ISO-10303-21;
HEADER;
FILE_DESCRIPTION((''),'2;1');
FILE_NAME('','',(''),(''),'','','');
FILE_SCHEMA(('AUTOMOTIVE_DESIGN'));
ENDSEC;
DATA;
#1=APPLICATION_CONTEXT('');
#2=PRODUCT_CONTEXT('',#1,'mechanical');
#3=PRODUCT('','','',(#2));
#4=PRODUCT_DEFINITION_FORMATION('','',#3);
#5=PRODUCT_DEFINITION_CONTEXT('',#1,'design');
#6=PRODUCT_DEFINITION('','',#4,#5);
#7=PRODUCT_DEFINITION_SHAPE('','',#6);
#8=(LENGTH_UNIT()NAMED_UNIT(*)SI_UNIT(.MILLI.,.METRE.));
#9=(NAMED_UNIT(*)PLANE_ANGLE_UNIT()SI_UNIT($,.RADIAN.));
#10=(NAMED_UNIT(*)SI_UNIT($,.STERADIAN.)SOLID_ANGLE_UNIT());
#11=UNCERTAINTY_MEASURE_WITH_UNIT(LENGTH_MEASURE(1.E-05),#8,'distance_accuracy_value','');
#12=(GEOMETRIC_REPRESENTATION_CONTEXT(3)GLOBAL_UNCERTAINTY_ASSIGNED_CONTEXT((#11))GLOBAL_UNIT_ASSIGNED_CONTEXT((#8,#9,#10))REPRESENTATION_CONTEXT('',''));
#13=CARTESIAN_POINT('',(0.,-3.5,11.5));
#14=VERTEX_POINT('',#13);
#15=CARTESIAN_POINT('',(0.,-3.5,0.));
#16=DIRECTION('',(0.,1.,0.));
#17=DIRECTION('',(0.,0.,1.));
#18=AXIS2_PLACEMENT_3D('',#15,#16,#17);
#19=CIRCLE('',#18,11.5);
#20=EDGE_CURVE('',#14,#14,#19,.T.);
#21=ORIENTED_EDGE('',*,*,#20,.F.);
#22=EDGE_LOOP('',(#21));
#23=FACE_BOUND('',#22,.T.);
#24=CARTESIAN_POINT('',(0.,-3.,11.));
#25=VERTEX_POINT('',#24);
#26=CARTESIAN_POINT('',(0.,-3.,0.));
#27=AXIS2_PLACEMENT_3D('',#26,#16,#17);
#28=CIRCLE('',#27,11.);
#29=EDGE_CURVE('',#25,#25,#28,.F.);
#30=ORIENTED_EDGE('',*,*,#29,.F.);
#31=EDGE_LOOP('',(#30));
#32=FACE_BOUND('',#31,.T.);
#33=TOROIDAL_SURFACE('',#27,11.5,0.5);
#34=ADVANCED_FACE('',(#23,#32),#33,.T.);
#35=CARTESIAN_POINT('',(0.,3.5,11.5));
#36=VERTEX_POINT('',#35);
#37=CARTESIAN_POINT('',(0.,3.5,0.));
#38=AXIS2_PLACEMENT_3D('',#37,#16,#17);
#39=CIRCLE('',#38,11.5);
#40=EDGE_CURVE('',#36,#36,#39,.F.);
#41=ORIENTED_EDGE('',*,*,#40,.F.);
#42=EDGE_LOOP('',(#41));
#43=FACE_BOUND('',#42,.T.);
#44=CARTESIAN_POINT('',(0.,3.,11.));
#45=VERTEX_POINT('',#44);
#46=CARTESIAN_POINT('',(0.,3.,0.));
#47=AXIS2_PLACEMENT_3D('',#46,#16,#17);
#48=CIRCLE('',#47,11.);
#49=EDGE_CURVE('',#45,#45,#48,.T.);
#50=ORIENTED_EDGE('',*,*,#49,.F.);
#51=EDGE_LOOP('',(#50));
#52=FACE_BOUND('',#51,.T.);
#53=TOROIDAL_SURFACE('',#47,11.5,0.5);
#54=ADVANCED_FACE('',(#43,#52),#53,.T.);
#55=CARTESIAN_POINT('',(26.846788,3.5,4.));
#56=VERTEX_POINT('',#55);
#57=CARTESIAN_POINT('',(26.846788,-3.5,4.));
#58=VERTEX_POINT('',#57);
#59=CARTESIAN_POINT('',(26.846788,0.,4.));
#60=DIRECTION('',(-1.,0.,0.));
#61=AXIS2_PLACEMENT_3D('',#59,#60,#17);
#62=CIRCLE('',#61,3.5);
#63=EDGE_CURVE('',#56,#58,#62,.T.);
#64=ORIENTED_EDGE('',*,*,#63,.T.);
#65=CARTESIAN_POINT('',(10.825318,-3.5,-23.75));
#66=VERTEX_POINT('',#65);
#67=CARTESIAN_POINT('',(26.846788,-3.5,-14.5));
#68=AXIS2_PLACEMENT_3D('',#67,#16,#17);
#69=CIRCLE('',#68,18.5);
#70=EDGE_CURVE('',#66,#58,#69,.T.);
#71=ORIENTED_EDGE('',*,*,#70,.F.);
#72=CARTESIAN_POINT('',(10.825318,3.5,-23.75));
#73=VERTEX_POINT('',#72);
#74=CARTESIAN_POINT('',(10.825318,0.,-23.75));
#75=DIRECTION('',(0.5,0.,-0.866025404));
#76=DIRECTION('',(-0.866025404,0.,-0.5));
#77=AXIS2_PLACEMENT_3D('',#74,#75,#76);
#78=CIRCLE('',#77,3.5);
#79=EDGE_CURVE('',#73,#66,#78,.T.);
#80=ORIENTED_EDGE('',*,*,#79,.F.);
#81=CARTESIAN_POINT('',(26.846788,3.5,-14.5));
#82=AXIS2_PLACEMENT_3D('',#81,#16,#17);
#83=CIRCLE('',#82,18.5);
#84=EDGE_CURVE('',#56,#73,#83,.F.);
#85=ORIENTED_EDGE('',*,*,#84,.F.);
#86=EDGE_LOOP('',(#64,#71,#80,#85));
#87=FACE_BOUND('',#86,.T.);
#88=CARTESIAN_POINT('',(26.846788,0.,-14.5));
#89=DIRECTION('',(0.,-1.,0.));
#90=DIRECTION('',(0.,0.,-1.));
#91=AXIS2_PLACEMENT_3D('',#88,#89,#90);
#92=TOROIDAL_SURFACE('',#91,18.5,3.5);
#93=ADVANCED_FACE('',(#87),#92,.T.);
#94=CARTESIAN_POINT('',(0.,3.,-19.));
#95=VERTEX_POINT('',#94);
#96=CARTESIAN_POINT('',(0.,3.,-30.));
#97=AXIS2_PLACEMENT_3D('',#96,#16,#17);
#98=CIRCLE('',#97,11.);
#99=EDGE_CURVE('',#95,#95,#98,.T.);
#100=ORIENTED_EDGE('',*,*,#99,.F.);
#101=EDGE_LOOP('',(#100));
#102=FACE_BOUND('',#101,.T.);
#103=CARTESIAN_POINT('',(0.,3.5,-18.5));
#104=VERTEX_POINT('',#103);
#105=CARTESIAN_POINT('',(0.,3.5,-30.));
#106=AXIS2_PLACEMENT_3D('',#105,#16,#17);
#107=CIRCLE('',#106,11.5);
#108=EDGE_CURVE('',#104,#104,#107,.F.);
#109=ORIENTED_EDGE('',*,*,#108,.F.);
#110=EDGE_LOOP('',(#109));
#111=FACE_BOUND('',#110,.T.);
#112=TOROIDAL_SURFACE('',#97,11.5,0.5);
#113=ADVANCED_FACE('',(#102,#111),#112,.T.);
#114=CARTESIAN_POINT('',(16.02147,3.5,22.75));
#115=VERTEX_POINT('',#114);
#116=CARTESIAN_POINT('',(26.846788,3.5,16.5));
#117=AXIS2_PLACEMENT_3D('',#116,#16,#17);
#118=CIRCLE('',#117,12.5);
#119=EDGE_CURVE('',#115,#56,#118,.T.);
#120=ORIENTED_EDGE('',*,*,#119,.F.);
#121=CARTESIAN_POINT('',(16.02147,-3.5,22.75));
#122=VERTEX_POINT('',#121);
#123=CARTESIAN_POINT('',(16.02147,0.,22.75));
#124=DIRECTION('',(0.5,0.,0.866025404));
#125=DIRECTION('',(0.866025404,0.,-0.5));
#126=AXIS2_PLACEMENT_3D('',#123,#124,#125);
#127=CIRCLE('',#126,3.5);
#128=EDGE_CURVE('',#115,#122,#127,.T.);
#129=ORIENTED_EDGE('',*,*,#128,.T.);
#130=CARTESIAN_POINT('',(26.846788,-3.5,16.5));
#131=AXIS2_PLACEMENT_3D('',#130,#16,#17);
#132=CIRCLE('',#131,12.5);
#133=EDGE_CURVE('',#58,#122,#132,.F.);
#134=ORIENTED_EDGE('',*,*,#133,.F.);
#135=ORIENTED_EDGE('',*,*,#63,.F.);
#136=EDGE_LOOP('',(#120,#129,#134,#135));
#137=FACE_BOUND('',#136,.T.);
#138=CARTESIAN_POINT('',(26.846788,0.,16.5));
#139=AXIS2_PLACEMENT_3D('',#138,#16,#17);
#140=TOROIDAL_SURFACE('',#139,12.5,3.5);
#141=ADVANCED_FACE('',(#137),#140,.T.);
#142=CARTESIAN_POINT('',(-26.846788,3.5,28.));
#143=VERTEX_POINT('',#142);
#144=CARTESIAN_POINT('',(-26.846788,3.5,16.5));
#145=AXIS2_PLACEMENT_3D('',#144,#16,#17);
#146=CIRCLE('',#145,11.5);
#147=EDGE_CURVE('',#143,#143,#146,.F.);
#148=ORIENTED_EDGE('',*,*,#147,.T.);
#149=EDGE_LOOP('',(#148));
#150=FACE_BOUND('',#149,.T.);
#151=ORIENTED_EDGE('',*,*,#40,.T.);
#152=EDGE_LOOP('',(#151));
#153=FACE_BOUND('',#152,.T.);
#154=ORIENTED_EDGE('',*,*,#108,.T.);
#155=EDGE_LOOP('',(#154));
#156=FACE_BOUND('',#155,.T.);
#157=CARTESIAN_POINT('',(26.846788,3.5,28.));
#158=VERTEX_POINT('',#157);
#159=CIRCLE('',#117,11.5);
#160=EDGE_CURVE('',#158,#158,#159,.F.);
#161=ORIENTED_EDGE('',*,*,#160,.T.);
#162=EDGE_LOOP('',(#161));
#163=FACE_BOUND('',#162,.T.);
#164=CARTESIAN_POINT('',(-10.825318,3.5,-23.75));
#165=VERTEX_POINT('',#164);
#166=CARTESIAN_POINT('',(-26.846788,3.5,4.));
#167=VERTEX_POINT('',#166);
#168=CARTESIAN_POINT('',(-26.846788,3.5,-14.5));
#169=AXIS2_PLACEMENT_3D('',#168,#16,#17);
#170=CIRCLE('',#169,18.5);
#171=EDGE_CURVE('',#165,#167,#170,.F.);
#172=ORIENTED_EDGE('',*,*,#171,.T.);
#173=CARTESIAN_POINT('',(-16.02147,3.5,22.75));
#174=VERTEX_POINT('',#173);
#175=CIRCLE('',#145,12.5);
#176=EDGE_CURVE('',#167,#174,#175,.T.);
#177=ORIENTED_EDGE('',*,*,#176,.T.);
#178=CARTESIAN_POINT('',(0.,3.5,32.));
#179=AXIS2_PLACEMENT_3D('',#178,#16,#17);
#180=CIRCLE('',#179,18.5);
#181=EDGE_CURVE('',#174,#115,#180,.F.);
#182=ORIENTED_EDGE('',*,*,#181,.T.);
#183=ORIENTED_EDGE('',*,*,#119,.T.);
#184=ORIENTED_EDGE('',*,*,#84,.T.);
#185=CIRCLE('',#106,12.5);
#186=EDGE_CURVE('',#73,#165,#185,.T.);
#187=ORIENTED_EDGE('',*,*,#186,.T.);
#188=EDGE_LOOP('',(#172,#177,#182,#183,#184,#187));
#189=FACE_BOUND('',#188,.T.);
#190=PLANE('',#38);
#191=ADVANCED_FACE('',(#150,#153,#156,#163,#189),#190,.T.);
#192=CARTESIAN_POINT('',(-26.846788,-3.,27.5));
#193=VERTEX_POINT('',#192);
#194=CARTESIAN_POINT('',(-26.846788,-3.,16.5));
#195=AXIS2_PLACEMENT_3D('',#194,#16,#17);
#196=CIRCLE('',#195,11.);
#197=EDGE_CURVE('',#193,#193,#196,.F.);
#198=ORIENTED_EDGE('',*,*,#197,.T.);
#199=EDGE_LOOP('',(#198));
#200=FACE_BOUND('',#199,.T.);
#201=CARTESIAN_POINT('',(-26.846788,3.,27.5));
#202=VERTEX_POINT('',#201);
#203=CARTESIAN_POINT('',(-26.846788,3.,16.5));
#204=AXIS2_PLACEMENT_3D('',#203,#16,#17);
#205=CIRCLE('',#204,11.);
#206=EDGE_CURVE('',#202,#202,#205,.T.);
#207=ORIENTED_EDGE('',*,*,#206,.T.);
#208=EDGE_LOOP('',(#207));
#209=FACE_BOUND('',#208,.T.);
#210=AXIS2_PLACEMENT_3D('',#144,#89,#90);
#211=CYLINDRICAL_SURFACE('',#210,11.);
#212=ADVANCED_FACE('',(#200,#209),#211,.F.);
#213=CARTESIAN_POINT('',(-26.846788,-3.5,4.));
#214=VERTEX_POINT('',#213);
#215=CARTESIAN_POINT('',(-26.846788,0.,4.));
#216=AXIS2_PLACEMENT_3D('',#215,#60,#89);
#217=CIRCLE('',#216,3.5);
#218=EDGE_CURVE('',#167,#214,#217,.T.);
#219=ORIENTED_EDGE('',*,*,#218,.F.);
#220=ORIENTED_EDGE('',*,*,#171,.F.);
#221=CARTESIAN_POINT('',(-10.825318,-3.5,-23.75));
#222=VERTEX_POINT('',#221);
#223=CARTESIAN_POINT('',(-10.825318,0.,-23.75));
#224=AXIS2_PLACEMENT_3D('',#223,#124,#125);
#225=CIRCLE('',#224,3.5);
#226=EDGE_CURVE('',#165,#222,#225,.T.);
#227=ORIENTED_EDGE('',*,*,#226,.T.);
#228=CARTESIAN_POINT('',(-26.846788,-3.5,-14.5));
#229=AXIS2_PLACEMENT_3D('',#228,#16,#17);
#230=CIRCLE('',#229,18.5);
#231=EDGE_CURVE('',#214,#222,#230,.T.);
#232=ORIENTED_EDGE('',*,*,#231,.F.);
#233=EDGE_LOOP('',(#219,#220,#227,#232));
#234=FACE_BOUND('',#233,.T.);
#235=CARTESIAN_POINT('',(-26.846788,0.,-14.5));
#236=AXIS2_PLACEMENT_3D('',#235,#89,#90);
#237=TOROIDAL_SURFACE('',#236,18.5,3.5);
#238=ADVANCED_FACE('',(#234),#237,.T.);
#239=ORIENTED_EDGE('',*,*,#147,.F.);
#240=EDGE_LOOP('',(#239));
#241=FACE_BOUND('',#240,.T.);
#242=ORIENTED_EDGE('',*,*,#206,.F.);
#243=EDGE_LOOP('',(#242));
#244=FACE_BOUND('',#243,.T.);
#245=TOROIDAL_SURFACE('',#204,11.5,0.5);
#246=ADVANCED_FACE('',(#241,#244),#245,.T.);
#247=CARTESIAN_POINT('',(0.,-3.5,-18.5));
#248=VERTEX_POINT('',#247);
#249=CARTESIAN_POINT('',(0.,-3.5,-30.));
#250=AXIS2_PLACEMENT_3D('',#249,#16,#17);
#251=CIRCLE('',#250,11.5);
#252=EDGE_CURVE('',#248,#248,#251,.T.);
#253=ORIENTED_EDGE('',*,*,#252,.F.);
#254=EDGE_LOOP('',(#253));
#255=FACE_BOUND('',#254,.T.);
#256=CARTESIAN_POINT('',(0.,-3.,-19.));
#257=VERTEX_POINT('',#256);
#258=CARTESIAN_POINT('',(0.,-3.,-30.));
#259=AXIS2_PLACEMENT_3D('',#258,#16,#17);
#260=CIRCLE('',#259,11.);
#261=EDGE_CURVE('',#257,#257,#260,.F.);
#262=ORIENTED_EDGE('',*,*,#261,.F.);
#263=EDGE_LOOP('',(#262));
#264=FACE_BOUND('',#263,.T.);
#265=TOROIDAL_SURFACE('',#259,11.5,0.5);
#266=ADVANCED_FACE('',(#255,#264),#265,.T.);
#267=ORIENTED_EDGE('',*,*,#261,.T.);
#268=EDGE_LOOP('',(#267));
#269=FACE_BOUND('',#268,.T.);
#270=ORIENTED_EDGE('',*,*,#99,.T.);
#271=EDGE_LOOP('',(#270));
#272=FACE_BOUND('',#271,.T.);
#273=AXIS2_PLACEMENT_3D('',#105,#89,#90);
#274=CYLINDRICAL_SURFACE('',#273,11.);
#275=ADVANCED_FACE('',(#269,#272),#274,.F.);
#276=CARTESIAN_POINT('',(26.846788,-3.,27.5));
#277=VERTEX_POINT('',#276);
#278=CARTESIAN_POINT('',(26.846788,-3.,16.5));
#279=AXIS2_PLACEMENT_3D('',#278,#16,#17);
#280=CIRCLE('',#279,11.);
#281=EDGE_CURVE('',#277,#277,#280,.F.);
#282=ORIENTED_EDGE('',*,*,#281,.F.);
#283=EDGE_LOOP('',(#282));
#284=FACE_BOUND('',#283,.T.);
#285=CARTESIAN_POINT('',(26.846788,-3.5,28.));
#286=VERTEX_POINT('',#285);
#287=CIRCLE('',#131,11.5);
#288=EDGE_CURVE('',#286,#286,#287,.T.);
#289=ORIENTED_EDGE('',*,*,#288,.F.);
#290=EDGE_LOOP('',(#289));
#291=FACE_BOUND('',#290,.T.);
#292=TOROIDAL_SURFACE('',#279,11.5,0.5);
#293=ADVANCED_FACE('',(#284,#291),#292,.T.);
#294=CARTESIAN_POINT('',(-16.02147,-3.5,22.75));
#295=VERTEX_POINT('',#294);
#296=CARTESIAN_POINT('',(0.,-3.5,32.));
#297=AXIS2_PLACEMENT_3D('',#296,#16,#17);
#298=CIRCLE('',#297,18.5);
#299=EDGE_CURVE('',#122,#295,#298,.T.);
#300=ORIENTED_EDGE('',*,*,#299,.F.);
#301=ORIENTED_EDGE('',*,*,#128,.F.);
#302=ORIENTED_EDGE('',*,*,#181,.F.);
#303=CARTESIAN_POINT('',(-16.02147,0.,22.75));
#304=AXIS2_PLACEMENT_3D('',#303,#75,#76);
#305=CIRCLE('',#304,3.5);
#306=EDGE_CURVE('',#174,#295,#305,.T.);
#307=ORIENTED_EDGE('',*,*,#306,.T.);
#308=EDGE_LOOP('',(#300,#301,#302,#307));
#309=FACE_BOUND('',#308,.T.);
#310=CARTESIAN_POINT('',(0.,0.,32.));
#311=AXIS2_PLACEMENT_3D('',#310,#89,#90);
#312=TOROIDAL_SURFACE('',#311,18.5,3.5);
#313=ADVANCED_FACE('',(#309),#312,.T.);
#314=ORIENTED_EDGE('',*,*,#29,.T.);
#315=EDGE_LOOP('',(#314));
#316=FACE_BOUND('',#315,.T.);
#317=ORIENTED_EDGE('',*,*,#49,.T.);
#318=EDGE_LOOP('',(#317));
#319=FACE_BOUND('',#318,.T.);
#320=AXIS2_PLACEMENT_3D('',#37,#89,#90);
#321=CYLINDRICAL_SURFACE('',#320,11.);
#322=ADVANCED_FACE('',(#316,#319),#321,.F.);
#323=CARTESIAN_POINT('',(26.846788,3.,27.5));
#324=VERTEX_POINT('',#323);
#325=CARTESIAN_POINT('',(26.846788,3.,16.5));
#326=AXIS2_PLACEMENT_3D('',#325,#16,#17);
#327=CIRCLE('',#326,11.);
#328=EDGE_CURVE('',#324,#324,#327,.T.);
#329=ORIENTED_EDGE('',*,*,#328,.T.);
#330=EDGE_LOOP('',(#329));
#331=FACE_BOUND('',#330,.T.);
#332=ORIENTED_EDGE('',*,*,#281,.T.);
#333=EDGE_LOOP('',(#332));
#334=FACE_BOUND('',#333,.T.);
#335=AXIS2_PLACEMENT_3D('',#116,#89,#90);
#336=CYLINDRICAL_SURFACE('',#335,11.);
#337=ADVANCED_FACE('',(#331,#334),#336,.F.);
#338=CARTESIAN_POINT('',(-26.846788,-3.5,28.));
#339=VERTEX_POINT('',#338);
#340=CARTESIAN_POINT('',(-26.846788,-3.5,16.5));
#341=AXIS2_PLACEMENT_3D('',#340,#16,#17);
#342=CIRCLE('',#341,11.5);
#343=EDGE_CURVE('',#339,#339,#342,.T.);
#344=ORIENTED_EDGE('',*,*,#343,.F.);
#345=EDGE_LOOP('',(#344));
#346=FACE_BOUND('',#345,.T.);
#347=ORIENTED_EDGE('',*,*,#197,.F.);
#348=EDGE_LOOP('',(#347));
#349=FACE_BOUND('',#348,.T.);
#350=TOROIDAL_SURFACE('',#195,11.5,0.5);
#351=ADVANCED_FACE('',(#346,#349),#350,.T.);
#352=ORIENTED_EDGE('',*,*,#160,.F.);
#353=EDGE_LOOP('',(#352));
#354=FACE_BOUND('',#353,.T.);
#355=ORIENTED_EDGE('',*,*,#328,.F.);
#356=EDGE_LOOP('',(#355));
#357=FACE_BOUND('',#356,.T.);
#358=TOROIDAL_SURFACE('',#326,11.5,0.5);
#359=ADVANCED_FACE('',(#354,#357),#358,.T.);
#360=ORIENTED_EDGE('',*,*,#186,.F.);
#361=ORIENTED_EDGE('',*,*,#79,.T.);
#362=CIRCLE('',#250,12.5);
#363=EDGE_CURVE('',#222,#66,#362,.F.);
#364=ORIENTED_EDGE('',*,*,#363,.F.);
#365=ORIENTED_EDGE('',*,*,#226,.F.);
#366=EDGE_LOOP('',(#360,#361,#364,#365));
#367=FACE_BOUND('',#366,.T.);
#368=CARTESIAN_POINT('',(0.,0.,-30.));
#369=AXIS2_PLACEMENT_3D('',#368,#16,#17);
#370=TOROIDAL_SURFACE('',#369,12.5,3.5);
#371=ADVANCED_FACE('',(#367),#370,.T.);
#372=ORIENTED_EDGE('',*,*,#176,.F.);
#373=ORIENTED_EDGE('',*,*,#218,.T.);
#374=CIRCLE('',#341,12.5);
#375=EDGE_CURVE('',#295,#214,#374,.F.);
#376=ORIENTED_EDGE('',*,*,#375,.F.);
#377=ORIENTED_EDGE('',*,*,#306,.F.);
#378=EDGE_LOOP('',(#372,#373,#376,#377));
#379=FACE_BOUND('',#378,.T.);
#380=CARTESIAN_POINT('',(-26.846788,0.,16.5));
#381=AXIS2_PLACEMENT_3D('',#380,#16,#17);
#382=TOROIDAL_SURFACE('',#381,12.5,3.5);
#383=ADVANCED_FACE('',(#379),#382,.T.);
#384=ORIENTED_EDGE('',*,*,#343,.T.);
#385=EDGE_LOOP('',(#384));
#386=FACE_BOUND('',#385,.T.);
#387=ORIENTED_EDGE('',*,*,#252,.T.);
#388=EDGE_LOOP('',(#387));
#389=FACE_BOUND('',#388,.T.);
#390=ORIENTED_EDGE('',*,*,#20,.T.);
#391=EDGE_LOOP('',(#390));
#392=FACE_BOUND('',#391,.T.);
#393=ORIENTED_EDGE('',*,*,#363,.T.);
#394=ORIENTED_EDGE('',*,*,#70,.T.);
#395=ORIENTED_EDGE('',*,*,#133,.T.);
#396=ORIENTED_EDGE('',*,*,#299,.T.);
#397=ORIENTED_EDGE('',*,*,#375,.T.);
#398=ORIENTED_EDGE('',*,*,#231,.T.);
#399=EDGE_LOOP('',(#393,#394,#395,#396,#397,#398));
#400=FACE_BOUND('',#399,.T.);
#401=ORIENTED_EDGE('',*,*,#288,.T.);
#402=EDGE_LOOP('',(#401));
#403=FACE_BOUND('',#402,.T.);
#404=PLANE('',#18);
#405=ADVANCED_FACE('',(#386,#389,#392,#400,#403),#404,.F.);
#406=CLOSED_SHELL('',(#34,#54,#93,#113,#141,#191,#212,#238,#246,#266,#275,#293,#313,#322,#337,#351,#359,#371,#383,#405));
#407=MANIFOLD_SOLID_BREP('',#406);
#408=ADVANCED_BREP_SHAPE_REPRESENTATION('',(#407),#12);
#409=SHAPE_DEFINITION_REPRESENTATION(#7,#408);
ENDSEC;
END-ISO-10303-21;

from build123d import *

# Parameters (mm, degrees)
SKETCH1_R           = 11
BOSS_EXTRUDE1_DEPTH = 3.5
FILLET1_R           = 3.5
FILLET2_R           = 0.5


with BuildPart() as part:
    # Sketch1 → Boss-Extrude1 (new, symmetric)
    with BuildSketch(Plane(origin=(0, 0, 0), x_dir=(1, 0, 0), z_dir=(0, 1, 0))):
        with BuildLine():
            ThreePointArc((-26.846787517, -0.5), (-40.703193978, -24.5), (-12.990381057, -24.5))
            ThreePointArc((-12.990381057, -24.5), (0, -17), (12.990381057, -24.5))
            ThreePointArc((12.990381057, -24.5), (40.703193978, -24.5), (26.846787517, -0.5))
            ThreePointArc((26.846787517, -0.5), (13.856406461, 7), (13.856406461, 22))
            ThreePointArc((13.856406461, 22), (0, 46), (-13.856406461, 22))
            ThreePointArc((-13.856406461, 22), (-13.856406461, 7), (-26.846787517, -0.5))
        make_face()
        with Locations(Location((-26.846787517, -16.5, 0), (0, 0, 270))):
            Circle(SKETCH1_R, mode=Mode.SUBTRACT)
        with Locations(Location((0, 0, 0), (0, 0, 270))):
            Circle(SKETCH1_R, mode=Mode.SUBTRACT)
        with Locations(Location((0, 30, 0), (0, 0, 270))):
            Circle(SKETCH1_R, mode=Mode.SUBTRACT)
        with Locations(Location((26.846787517, -16.5, 0), (0, 0, 270))):
            Circle(SKETCH1_R, mode=Mode.SUBTRACT)
    extrude(amount=BOSS_EXTRUDE1_DEPTH, both=True)

    # Fillet1
    fillet1_edges = [part.edges().sort_by_distance(p)[0] for p in [
        (-13.856406461, -3.5, -7),
        (-40.703193978, 3.5, 24.5),
        (0, -3.5, -46),
        (13.856406461, -3.5, -7),
        (40.703193978, -3.5, 24.5),
        (0, -3.5, 17),
    ]]
    fillet(fillet1_edges, radius=FILLET1_R - 0.0001)  # a hair under: the kernel refuses the full size

    # Fillet2
    fillet2_edges = [part.edges().sort_by_distance(p)[0] for p in [
        (26.846787517, -3.5, 5.5),
        (0, -3.5, -41),
        (0, -3.5, -11),
        (-26.846787517, -3.5, 5.5),
        (0, 3.5, -11),
        (0, 3.5, -41),
        (26.846787517, 3.5, 5.5),
        (-26.846787517, 3.5, 5.5),
    ]]
    fillet(fillet2_edges, radius=FILLET2_R)


solid = part.part
